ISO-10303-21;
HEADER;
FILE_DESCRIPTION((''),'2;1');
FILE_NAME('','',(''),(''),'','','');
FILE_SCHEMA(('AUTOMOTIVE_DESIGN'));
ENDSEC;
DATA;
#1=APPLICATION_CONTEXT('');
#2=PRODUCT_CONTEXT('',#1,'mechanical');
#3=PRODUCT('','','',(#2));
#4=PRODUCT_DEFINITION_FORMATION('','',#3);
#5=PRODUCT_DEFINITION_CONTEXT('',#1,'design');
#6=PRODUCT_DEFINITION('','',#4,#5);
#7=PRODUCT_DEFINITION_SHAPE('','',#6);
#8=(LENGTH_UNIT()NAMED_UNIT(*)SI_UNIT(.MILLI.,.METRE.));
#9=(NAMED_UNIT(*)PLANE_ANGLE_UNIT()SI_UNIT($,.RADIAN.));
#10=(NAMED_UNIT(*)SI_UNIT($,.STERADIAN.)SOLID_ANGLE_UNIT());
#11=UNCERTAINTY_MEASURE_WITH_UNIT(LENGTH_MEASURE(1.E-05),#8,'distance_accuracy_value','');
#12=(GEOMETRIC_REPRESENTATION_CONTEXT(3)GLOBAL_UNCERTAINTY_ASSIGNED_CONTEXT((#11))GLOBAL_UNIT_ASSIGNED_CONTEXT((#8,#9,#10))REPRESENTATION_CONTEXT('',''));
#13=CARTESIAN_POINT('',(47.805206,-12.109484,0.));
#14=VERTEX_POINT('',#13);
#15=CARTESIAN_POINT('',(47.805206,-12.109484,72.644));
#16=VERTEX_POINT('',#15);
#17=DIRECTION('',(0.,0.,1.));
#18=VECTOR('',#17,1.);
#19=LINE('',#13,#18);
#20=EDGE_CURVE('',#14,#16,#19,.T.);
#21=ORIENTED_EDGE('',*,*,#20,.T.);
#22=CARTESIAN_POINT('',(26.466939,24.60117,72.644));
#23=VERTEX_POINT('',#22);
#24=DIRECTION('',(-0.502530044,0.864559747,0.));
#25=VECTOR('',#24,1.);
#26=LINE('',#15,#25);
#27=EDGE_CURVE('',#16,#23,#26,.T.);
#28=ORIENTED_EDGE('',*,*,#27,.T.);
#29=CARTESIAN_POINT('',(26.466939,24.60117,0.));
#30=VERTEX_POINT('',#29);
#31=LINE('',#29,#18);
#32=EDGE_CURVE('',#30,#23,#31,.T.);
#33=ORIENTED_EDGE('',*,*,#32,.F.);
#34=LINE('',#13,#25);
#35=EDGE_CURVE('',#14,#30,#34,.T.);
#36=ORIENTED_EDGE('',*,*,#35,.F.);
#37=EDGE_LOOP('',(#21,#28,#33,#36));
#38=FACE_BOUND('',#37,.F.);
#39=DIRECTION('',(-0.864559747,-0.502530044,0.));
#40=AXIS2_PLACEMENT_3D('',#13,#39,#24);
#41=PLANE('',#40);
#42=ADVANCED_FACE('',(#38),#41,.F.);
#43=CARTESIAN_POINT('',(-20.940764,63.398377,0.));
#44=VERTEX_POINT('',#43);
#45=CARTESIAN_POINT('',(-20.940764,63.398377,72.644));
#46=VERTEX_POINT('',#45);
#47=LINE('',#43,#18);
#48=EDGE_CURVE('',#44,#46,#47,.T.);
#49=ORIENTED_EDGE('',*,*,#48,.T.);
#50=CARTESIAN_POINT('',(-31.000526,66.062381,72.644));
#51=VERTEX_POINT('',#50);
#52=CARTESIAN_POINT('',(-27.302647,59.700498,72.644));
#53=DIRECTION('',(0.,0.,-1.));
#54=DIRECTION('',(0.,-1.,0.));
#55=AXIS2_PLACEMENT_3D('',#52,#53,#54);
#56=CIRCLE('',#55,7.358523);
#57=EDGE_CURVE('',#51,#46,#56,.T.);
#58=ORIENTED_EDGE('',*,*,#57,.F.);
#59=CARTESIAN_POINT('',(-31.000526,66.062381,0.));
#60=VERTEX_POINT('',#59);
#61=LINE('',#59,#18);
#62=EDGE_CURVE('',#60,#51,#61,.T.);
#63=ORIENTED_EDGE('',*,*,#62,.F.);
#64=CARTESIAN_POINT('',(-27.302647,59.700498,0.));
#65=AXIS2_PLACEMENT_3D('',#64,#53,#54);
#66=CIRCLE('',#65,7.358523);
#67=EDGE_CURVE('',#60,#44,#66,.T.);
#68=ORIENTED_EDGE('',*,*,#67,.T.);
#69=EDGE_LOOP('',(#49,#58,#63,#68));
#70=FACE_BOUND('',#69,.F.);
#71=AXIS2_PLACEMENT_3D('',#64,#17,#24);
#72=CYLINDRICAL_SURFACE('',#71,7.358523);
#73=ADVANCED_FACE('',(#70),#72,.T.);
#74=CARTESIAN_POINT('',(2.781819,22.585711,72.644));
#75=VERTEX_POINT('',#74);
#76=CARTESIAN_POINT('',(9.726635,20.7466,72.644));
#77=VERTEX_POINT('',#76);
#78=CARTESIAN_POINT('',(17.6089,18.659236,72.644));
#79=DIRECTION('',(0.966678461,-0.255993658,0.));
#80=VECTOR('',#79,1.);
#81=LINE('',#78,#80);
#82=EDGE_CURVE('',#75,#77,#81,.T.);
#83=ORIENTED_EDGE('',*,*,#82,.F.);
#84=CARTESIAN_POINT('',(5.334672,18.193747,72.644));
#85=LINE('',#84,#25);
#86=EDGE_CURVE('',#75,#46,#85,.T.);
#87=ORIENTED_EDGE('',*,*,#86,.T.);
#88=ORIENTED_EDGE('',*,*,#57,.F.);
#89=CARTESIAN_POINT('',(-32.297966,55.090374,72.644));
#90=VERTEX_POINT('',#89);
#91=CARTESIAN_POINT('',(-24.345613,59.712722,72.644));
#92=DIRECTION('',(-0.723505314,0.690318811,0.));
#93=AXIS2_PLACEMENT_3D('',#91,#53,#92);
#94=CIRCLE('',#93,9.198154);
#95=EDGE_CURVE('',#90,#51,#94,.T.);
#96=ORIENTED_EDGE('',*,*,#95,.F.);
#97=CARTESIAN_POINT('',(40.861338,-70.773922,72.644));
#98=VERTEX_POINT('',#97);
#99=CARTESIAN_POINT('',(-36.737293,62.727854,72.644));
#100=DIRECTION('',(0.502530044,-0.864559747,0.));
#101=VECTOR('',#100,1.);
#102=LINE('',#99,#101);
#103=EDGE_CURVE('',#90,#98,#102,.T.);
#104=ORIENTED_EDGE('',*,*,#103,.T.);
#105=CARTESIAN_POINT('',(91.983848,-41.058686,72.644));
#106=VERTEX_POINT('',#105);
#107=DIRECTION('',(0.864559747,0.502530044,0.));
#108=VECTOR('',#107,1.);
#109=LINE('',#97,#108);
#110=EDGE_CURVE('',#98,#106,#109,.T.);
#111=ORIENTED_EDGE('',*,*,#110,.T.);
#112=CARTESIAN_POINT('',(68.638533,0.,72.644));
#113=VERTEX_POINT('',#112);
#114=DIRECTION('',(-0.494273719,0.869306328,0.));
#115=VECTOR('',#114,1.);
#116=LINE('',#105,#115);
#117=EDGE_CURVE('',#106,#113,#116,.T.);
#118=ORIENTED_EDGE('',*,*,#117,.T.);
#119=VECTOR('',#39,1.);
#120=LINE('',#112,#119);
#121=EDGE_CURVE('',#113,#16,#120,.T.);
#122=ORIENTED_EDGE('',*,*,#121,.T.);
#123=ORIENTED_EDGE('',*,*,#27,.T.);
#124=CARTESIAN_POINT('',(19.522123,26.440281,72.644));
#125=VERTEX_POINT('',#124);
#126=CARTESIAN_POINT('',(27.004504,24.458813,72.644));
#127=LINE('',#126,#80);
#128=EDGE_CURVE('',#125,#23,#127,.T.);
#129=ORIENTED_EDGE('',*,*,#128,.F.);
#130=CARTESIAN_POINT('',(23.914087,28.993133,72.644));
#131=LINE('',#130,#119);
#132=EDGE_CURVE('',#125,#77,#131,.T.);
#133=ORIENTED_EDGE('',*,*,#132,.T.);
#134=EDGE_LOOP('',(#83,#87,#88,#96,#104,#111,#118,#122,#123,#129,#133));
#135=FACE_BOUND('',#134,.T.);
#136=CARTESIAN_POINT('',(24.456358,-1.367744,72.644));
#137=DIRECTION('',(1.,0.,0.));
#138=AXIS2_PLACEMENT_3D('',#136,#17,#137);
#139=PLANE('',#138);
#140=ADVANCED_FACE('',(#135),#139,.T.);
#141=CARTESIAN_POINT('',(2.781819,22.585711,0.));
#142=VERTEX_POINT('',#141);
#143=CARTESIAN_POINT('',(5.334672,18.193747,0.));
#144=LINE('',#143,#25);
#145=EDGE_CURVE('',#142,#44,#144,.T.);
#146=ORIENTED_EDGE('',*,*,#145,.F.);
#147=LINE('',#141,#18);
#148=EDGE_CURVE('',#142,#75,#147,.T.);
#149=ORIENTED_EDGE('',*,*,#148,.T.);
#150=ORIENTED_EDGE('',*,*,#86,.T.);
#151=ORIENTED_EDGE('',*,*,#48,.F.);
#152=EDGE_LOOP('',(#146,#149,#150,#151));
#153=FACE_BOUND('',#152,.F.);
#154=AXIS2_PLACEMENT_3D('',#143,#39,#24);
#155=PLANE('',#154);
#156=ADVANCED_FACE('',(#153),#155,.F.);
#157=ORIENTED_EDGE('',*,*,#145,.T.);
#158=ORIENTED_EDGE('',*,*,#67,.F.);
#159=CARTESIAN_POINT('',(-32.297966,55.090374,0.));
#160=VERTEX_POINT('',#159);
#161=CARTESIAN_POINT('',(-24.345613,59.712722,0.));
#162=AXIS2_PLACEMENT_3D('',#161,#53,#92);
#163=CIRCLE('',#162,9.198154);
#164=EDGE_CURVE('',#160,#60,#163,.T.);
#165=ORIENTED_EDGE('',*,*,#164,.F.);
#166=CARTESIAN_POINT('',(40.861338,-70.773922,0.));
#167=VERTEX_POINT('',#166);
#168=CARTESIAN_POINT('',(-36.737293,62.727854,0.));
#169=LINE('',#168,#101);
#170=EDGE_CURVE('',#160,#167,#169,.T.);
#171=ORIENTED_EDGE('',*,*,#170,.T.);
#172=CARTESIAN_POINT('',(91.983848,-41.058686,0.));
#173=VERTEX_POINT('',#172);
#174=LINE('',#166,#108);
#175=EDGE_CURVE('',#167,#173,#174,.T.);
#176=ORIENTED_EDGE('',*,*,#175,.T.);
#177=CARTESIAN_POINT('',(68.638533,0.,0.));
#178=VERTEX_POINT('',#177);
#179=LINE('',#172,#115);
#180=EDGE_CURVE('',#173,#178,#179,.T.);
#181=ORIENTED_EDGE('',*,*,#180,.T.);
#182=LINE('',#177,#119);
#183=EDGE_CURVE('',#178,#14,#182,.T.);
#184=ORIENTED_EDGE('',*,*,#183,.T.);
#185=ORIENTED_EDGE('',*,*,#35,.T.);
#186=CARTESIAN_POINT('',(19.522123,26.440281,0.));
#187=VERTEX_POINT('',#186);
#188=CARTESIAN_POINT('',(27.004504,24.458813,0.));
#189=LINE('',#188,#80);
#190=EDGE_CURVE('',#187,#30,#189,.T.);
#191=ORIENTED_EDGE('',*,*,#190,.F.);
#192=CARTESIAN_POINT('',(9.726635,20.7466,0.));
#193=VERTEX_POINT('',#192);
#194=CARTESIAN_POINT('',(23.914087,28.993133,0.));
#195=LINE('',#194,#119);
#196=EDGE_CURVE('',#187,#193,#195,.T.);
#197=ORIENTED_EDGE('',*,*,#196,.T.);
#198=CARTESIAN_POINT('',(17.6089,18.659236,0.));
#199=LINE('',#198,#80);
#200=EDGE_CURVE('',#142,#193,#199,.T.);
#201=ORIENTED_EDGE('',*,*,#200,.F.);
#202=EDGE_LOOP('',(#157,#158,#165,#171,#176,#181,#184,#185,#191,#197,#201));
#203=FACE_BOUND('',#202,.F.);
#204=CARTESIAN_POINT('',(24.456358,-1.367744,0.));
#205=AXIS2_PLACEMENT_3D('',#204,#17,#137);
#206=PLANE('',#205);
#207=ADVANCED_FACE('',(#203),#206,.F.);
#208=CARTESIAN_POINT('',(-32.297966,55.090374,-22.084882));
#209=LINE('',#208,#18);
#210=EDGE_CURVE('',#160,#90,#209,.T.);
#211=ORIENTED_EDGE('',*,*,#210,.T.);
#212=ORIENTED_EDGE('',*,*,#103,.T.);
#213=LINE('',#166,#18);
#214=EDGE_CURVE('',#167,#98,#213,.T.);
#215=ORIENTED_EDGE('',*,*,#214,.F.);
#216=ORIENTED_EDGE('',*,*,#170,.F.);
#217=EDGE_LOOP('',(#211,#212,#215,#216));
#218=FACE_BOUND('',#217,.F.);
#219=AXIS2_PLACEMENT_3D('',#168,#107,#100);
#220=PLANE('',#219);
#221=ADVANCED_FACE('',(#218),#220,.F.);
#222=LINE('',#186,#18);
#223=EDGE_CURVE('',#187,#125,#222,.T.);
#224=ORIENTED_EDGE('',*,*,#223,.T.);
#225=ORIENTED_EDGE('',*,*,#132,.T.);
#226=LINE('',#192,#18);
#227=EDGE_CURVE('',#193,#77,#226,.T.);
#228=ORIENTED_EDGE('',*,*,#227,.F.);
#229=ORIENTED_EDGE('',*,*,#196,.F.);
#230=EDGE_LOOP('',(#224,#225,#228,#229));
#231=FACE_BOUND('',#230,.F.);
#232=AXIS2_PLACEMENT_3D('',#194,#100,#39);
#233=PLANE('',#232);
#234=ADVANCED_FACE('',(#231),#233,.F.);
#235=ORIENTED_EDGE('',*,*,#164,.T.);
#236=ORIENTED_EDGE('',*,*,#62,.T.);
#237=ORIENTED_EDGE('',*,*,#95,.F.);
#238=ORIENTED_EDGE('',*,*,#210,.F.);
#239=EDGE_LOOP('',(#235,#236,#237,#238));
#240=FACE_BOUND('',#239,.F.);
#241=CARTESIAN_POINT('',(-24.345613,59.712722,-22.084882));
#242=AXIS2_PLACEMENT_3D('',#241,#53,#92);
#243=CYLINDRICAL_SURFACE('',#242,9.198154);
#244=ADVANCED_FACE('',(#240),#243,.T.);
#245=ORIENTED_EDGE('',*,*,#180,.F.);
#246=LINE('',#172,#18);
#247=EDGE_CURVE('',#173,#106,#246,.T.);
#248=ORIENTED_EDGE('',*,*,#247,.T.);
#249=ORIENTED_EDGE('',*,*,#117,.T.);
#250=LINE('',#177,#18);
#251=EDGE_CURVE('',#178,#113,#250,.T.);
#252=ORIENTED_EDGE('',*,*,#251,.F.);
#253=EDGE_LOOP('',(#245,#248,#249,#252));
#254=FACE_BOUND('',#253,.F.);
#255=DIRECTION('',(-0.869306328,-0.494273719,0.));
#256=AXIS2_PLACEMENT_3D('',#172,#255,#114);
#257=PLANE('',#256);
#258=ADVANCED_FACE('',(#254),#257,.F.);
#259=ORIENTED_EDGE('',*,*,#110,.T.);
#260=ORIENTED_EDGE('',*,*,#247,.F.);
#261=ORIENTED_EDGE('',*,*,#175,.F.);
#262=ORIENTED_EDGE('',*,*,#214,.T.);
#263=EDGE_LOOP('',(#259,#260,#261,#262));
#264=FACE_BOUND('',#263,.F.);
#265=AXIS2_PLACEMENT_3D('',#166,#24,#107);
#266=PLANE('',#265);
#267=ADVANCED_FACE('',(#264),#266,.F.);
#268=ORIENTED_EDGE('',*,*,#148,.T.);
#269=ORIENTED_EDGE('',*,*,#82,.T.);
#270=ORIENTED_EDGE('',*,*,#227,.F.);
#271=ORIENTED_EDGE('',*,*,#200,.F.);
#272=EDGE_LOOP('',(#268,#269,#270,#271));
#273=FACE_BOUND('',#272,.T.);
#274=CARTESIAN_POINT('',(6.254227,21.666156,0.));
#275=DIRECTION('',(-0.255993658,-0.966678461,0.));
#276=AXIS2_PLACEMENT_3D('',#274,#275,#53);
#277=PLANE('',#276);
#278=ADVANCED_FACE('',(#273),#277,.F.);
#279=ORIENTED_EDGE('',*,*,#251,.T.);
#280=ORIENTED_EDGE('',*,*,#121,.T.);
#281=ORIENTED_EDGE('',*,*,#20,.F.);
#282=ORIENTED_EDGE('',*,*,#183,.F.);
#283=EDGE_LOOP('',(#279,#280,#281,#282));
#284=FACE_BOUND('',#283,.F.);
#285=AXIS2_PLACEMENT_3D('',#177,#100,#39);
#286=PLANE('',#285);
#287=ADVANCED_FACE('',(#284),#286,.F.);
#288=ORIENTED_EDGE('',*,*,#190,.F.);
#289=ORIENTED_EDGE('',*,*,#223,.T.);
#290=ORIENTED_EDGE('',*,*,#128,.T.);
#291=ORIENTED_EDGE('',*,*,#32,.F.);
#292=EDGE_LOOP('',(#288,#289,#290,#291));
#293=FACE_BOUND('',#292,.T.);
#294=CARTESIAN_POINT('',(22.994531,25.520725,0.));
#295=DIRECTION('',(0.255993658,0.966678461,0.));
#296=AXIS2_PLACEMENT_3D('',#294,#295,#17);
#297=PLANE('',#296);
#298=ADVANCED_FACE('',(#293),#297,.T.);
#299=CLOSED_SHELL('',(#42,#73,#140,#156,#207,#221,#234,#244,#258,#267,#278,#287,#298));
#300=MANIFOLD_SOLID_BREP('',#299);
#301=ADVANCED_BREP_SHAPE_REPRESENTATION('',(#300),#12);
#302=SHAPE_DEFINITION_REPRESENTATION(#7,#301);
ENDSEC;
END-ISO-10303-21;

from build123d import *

# Parameters (mm, degrees)
F1_DEPTH    = 72.644
F2_R        = 7.3585229381
F3_SIZE     = 5.08
F4_SIZE     = 5.08
F5_T1_DEPTH = 116.8137644874


# Not quite as in the source:
# - a fillet or chamfer that OpenCascade refuses, or shapes differently, is made with other operations: its cross-section is extruded or revolved along the edge and cut away or added


with BuildPart() as f1:
    # F0 (on Top) → F1 (new body)
    with BuildSketch(Plane.XY):
        Polygon((-24.6386431996, 69.7602594984), (-36.737293005, 62.7278536558), (40.861338377, -70.7739219069), (91.9838476343, -41.0586860274), (68.6385333538, 0), (47.8052062724, -12.1094844007), (23.9140867359, 28.9931332809), (5.3346716929, 18.1937474815), align=None)
    extrude(amount=F1_DEPTH)

    # F2
    f2_edges = [f1.edges().sort_by_distance(p)[0] for p in [
        (-24.638643, 69.760259, 36.322),
    ]]
    fillet(f2_edges, radius=F2_R)

    # F3
    f3_edges = [f1.edges().sort_by_distance(p)[0] for p in [
        (5.334672, 18.193747, 36.322),
    ]]
    chamfer(f3_edges, length=F3_SIZE)

    # F4
    f4_edges = [f1.edges().sort_by_distance(p)[0] for p in [
        (23.914087, 28.993133, 36.322),
    ]]
    chamfer(f4_edges, length=F4_SIZE)

    # F5: fillet of radius 9.1981536726 on 1 edges, made by hand

    # F5_s2 → F5_t1 (cut)
    with BuildSketch(Plane.XY.offset(-22.0848822437)):
        with BuildLine():
            ThreePointArc((-31.0005259261, 66.0623806462), (-33.480123973, 60.7928785055), (-32.2979662711, 55.0903735776))
            Line((-32.2979662711, 55.0903735776), (-36.737293005, 62.7278536558))
            Line((-36.737293005, 62.7278536558), (-31.0005259261, 66.0623806462))
        make_face()
    extrude(amount=F5_T1_DEPTH, mode=Mode.SUBTRACT)


solid = f1.part
